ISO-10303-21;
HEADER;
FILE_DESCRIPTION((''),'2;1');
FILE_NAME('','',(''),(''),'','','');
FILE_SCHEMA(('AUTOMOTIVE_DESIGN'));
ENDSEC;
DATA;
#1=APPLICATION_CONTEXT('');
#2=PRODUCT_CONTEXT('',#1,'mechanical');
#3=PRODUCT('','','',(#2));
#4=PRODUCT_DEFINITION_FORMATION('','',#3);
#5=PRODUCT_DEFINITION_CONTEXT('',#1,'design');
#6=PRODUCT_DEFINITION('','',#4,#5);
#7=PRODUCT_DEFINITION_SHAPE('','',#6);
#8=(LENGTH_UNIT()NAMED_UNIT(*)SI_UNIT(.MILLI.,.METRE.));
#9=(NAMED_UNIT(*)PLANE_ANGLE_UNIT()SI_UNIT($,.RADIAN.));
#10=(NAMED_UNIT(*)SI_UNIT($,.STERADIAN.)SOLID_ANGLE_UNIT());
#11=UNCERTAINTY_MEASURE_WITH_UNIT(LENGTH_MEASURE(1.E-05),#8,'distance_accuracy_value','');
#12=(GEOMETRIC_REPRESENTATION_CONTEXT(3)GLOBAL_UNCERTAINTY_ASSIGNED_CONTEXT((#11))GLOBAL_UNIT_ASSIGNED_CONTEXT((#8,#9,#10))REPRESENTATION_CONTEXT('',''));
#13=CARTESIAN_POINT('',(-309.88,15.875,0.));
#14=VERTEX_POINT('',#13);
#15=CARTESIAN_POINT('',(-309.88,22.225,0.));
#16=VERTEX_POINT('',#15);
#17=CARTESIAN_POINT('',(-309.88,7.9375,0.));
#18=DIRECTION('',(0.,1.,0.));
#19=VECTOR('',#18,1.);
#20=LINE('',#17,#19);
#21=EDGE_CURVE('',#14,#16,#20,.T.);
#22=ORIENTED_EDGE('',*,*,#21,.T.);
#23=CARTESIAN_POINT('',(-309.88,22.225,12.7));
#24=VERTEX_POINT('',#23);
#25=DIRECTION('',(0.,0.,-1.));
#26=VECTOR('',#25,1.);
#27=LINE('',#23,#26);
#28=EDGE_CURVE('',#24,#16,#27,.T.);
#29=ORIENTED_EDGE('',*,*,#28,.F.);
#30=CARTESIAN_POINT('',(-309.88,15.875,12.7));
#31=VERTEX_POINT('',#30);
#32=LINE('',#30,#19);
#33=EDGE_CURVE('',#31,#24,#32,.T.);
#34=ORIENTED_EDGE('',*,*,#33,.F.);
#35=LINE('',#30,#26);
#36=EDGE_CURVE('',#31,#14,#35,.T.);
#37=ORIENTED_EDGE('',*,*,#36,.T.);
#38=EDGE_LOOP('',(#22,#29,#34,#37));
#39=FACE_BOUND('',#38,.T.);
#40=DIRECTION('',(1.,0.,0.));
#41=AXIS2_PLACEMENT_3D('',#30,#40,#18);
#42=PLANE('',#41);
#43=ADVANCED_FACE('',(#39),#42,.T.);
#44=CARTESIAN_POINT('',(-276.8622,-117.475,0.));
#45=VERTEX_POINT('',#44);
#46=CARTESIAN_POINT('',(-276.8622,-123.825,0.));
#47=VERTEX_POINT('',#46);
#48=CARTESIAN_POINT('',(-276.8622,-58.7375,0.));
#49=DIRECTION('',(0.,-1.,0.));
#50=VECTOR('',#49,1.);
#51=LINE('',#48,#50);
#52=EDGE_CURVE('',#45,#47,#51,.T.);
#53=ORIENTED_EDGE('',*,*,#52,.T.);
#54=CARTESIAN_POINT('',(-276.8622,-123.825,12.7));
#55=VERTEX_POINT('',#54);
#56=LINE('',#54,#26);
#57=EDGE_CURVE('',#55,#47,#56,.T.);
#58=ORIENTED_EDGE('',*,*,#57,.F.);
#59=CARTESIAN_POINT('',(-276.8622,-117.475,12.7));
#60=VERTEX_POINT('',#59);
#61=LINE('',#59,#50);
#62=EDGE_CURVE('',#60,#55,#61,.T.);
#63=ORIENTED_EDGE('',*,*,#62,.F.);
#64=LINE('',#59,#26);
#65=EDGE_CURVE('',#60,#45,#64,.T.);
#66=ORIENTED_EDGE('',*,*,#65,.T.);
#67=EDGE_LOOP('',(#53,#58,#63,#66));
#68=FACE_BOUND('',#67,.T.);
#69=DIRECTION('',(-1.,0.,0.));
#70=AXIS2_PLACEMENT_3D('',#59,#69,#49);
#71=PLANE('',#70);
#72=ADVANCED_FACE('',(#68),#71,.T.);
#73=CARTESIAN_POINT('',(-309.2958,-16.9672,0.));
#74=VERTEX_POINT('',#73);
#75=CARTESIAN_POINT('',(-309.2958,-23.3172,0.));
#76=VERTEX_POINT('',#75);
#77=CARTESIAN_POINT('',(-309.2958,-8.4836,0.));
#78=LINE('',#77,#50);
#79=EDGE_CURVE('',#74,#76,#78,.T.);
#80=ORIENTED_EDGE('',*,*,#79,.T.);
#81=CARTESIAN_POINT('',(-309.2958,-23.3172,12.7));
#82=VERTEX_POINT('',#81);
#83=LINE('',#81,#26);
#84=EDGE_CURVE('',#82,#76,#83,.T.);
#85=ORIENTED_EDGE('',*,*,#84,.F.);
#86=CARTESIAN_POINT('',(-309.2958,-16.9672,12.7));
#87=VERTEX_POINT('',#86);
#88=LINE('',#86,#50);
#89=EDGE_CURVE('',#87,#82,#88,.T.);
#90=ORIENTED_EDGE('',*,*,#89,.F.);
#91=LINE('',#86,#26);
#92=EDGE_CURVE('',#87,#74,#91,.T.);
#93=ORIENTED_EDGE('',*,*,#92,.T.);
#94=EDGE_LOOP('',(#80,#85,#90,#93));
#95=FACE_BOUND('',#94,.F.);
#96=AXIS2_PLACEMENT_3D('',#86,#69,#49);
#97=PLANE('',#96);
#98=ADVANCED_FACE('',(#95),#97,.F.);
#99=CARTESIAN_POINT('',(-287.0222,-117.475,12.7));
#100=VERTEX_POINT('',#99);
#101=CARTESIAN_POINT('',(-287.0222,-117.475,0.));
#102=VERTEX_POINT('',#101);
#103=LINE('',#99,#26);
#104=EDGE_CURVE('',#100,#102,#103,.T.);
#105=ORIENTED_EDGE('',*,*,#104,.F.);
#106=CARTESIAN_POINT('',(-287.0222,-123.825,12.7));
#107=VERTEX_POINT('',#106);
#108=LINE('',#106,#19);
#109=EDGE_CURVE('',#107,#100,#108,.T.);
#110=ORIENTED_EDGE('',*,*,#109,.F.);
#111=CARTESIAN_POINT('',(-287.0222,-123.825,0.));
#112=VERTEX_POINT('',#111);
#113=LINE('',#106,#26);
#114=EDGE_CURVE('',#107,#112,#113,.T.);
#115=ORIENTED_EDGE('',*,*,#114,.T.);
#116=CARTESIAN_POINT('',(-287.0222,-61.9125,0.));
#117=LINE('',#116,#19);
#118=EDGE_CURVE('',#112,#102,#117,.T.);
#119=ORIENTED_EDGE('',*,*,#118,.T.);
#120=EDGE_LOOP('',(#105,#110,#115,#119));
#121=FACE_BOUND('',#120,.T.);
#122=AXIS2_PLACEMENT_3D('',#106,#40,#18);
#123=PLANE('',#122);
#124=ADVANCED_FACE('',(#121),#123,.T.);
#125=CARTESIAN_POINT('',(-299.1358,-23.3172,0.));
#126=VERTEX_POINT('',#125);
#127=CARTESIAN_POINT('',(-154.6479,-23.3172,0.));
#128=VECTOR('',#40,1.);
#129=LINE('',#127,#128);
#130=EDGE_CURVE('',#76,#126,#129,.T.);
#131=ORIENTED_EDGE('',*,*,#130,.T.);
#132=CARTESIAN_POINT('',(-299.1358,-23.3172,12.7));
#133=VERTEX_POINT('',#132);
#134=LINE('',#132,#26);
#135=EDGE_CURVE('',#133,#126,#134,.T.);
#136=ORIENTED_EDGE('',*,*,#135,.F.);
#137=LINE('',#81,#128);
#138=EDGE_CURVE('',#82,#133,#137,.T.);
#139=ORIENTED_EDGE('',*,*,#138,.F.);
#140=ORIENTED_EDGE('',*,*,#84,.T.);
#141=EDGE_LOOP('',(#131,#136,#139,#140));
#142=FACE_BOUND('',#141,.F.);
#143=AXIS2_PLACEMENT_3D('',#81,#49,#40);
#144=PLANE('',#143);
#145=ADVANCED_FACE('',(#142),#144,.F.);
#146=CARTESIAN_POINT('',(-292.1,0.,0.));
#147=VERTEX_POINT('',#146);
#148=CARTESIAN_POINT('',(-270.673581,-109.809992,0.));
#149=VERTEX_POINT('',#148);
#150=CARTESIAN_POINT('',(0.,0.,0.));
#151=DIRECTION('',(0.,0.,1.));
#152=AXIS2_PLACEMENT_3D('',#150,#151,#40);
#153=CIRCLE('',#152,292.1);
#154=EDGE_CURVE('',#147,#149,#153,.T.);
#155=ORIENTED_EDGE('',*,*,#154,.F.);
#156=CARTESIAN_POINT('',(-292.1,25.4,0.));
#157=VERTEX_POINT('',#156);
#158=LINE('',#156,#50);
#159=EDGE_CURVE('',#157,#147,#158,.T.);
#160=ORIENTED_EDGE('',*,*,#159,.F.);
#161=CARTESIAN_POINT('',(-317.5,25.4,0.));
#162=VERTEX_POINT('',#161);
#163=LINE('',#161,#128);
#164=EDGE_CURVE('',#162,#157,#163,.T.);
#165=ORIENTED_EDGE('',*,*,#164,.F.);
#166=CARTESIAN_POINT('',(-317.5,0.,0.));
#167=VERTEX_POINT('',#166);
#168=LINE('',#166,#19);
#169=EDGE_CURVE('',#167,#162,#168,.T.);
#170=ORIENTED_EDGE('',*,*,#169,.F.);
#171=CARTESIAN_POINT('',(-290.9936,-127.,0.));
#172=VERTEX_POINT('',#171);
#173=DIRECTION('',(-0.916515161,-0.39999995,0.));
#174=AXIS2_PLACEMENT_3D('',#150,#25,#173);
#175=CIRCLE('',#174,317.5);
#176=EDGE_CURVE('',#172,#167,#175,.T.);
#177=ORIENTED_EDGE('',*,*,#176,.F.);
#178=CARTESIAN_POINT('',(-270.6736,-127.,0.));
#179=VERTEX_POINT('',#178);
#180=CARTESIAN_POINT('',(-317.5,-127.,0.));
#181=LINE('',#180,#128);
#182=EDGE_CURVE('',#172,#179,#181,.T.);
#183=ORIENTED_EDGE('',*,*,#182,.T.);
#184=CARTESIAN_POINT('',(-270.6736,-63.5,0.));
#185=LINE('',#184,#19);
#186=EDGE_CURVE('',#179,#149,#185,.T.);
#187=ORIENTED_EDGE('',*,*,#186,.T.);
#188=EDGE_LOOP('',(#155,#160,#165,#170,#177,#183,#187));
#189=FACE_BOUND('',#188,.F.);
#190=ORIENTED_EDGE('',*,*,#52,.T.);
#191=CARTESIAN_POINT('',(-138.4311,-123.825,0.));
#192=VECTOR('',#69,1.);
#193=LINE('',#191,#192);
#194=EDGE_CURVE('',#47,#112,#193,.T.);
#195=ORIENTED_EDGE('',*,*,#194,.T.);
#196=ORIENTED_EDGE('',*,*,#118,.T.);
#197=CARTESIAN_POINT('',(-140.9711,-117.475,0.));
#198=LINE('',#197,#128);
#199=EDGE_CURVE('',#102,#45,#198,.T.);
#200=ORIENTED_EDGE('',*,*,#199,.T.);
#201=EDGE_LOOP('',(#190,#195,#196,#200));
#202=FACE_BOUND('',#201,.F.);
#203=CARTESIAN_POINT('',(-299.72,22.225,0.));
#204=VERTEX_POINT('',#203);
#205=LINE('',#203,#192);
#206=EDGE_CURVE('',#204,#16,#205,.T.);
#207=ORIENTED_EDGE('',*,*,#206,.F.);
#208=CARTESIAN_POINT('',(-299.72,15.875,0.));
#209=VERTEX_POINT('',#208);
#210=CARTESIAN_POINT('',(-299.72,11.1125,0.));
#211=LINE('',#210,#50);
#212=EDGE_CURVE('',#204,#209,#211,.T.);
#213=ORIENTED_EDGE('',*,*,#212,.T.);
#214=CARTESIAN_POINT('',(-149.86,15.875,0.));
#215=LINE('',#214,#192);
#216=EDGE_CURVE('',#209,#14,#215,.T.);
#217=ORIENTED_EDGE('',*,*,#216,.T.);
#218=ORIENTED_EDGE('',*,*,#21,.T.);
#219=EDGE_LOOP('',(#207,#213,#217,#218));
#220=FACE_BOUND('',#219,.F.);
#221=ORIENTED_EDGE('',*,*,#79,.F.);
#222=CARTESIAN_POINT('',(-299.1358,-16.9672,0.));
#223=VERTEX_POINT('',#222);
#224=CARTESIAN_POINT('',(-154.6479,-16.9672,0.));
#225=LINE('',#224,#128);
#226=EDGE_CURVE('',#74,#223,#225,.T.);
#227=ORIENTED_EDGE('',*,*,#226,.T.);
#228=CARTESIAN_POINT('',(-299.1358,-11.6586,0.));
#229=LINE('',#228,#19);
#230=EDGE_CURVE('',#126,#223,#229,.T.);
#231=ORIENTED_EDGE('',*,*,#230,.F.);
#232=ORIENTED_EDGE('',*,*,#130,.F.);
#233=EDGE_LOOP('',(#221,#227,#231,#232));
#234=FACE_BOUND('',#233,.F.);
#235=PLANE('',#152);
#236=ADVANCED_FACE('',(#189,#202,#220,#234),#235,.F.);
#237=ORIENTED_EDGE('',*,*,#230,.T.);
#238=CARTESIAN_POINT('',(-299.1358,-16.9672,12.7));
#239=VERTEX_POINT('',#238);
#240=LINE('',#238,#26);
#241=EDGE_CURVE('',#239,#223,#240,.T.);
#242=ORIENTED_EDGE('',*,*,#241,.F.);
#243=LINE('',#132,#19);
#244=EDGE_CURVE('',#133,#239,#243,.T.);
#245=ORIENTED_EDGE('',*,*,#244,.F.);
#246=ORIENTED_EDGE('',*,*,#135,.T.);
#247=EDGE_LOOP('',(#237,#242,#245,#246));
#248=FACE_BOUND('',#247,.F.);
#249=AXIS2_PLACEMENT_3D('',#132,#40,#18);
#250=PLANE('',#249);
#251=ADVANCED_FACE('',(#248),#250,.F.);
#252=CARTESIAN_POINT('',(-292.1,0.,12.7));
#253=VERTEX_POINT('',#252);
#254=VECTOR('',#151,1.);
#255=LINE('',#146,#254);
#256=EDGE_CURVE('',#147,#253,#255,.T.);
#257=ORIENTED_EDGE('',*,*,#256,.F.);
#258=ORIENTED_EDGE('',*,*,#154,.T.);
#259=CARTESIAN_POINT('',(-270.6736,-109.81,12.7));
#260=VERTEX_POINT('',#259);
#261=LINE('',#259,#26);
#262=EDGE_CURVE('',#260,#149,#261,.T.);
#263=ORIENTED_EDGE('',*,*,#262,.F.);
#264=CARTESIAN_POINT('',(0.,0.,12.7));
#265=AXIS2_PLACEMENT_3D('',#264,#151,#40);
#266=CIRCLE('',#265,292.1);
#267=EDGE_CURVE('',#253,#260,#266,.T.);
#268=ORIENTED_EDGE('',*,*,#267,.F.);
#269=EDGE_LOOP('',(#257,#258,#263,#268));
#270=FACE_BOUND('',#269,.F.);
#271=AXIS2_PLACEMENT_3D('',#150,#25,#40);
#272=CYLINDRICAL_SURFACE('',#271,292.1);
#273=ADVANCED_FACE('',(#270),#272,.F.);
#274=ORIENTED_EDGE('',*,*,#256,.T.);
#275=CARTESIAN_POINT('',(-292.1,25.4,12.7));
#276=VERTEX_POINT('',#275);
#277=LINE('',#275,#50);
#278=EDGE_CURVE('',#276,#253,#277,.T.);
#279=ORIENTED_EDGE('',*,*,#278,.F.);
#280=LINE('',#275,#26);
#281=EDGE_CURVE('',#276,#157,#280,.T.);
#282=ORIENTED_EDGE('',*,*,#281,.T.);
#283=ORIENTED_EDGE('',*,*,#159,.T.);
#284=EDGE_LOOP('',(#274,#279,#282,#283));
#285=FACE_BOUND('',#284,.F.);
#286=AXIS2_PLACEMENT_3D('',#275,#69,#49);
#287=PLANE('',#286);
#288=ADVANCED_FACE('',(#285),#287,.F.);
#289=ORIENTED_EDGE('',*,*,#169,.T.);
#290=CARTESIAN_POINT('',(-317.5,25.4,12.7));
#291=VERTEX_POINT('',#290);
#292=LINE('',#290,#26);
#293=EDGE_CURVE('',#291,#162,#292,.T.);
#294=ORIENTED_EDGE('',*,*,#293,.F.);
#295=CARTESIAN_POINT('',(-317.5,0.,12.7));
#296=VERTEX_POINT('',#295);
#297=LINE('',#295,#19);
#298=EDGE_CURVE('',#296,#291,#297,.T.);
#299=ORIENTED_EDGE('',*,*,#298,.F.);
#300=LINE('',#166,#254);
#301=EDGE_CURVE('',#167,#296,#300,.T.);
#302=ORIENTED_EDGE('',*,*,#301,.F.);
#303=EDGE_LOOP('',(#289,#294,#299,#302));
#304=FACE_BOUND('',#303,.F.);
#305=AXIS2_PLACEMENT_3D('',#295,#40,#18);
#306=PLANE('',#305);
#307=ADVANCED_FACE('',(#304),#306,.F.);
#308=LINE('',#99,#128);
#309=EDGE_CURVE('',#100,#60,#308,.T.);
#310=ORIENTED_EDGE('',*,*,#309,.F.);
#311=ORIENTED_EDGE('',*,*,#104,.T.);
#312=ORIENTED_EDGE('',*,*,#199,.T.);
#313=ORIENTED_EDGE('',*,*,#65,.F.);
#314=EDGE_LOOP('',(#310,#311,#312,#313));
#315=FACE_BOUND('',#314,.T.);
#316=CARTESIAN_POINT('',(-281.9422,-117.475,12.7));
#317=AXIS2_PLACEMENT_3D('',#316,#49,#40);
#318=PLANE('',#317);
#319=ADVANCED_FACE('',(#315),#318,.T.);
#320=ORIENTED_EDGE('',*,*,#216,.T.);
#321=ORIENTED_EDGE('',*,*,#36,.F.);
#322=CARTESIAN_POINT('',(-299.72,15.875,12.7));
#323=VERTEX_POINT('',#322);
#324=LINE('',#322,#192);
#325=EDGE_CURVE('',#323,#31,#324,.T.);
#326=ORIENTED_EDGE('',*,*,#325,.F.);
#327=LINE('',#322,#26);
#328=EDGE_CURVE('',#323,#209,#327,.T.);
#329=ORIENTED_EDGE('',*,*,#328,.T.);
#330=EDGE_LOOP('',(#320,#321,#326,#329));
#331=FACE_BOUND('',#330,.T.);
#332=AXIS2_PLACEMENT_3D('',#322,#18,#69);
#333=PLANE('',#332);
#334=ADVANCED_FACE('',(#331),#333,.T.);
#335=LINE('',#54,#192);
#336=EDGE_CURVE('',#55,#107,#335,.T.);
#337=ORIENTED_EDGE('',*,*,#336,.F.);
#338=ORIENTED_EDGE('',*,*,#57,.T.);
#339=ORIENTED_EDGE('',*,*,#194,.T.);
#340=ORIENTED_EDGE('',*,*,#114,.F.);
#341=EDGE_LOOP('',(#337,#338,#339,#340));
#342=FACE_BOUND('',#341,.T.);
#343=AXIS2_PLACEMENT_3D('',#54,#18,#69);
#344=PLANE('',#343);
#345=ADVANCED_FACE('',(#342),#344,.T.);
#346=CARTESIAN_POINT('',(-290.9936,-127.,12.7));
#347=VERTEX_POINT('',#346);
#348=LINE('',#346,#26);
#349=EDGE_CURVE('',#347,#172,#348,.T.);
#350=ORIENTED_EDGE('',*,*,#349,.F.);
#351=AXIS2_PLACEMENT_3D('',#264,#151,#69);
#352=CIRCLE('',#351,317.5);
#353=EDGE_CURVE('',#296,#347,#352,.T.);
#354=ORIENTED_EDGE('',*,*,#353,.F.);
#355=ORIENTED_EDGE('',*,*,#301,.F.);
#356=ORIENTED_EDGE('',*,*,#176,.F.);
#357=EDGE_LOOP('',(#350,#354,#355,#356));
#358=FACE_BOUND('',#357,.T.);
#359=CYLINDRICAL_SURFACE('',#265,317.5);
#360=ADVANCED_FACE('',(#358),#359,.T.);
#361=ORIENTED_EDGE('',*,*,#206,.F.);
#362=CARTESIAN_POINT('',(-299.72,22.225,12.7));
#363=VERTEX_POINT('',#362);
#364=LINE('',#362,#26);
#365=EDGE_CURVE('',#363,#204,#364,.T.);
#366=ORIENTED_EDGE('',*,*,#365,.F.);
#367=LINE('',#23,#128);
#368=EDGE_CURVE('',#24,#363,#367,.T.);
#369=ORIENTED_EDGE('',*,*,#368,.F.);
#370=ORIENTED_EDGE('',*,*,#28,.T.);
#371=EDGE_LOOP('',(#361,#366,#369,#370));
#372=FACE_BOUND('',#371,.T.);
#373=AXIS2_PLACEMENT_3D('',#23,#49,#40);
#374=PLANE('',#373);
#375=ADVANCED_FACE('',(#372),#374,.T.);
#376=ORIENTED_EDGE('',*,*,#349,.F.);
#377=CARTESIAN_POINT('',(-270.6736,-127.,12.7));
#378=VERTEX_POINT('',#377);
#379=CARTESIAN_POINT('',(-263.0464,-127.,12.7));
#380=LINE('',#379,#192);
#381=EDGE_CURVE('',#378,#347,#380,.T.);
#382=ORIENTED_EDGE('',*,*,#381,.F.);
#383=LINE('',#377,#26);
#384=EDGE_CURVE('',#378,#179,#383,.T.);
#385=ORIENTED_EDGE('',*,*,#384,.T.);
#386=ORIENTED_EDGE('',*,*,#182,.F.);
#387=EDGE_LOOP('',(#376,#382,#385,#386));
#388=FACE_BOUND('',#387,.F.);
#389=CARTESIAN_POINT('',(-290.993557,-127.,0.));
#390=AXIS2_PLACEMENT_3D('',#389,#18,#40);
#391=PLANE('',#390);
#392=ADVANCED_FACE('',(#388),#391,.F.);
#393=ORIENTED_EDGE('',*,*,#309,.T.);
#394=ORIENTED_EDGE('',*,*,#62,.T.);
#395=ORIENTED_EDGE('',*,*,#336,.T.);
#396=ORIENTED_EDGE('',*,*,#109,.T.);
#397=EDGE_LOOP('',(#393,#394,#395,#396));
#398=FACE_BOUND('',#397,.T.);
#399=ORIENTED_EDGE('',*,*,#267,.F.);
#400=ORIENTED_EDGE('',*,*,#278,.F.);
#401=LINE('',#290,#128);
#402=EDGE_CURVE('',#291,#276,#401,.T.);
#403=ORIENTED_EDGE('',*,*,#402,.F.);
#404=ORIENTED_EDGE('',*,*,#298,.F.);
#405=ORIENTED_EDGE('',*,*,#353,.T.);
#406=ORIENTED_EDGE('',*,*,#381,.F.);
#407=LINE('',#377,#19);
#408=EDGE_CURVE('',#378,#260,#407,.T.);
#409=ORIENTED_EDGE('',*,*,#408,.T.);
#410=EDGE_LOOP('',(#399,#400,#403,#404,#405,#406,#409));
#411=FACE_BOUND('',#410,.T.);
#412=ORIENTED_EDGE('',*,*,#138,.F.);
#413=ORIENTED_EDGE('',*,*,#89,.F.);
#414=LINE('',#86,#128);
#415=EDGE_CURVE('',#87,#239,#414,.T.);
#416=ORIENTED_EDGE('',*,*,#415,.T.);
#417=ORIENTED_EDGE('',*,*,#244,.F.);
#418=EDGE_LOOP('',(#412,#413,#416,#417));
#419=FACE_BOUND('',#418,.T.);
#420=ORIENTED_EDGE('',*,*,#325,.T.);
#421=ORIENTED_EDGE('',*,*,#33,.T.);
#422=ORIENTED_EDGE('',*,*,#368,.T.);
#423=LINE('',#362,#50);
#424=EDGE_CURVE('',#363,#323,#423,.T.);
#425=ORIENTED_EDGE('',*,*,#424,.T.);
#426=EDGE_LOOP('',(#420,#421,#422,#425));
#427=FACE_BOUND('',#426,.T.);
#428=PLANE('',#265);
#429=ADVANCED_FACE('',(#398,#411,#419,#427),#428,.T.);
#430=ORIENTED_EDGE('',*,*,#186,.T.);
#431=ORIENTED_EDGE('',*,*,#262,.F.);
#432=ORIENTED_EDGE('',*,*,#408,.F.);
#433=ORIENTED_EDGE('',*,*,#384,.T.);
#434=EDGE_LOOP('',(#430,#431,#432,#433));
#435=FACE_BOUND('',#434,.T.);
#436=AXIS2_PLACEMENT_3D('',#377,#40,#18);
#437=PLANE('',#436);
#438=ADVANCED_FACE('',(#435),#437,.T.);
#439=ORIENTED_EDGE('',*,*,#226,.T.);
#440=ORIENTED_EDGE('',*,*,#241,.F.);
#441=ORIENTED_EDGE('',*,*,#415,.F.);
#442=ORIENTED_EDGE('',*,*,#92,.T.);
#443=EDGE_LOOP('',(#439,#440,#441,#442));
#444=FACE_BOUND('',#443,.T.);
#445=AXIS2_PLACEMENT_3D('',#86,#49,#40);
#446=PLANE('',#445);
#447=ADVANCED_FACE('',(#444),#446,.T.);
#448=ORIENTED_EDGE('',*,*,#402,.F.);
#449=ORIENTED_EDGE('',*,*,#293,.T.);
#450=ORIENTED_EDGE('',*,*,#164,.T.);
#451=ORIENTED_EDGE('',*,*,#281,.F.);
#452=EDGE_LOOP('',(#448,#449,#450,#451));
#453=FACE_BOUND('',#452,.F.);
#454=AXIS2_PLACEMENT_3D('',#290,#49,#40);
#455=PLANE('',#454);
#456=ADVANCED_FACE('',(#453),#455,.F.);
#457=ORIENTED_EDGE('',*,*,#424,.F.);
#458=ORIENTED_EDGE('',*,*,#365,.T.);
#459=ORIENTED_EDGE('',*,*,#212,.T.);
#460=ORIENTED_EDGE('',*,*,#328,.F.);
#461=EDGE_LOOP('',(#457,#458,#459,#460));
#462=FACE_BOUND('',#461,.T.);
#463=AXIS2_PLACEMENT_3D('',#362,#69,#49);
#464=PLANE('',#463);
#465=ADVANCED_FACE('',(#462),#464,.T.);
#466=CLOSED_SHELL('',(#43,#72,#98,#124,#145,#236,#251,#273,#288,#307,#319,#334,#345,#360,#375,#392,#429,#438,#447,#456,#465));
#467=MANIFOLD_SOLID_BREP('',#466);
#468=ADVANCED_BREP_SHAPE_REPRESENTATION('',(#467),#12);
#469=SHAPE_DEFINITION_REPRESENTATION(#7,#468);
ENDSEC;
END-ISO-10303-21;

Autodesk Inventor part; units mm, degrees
ref_plane "YZ Plane" through (0, 0, 0) normal (1, 0, 0) x (0, 1, 0)
ref_plane "XZ Plane" through (0, 0, 0) normal (0, 1, 0) x (-1, 0, 0)
ref_plane "XY Plane" through (0, 0, 0) normal (0, 0, 1) x (1, 0, 0)
sketch "Sketch1" plane through (0, 0, 0) normal (0, 0, 1) x (1, 0, 0)
  circle A0 centre (0, 0) radius 292.1
  line L0 (-292.1, 0) -> (-266.7, 0)
  line L1 (-292.1, 0) -> (-317.5, 0)
  circle A1 centre (0, 0) radius 317.5
  line L2 (-317.5, 0) -> (-317.5, -127)
  line L3 (-317.5, -127) -> (-263.0464, -127)
  circle A2 centre (0, 0) radius 317.5
  dimension "d0" = 584.2
  dimension "d1" = 25.4
  dimension "d2" = 25.4
  dimension "d3" = 127
extrude "Extrusion1" add sketch "Sketch1" along normal blind 12.7 contours A0 L3 A1 L1 | A1 L3 L2 picked at (-275.2864, -120.3141)
sketch "Sketch2" plane through (0, 0, 12.7) normal (0, 0, 1) x (1, 0, 0)
  line L0 (-317.5, 0) -> (-317.5, -127) projected
  line L1 (-317.5, -127) -> (-263.0464, -127) projected
  arc A0 (-292.1, 0) -> (-263.0464, -127) centre (0, 0) ccw projected
  circle A1 centre (0, 0) radius 292.1
  circle A2 centre (0, 0) radius 317.5
  line L2 (-317.5, 0) -> (-317.5, -127)
  line L3 (-317.5, -127) -> (-290.9936, -127)
extrude "Extrusion2" cut sketch "Sketch2" against normal blind 25.4 contours A2 L1 L0
sketch "Sketch3" plane through (0, 0, 12.7) normal (0, 0, 1) x (1, 0, 0)
  arc A0 (-317.5, 0) -> (-290.9936, -127) centre (0, 0) ccw projected
  line L0 (-290.9936, -127) -> (-316.1859, -127)
  line L1 (-295.9122, -115.0749) -> (-295.9122, -127)
  line L2 (-281.9422, -117.475) -> (-276.8622, -117.475)
  line L3 (-276.8622, -117.475) -> (-276.8622, -123.825)
  line L4 (-276.8622, -123.825) -> (-287.0222, -123.825)
  line L5 (-287.0222, -123.825) -> (-287.0222, -117.475)
  line L6 (-287.0222, -117.475) -> (-281.9422, -117.475)
  line L7 (-290.9936, -127) -> (-263.0464, -127) projected
  dimension "d16" = 5.08
  dimension "d17" = 6.35
  dimension "d18" = 10.16
  dimension "d20" = 4.9186
  dimension "d33" = 13.97
  dimension "d34" = 9.525
  dimension "d35" = 8.89
extrude "Extrusion3" cut sketch "Sketch3" against normal blind 25.4
sketch "Sketch4" plane through (0, 0, 12.7) normal (0, 0, 1) x (1, 0, 0)
  arc A0 (-317.5, 0) -> (-290.9936, -127) centre (0, 0) ccw projected
  arc A1 (-292.1, 0) -> (-263.0464, -127) centre (0, 0) ccw projected
  line L0 (-292.1, 0) -> (-317.5, 0) projected
  line L1 (-317.5, 0) -> (-317.5, 25.4)
  line L2 (-317.5, 25.4) -> (-292.1, 25.4)
  line L3 (-292.1, 25.4) -> (-292.1, 0)
  line L4 (-317.5, 0) -> (-292.1, 0)
  dimension "d24" = 25.4
extrude "Extrusion4" add sketch "Sketch4" against normal blind 12.7
sketch "Sketch5" plane through (0, 0, 12.7) normal (0, 0, 1) x (1, 0, 0)
  line L0 (-292.1, 0) -> (-292.1, 25.4) projected
  line L1 (-292.1, 25.4) -> (-317.5, 25.4) projected
  line L2 (-317.5, 25.4) -> (-317.5, 0) projected
  line L3 (-304.8, 25.4) -> (-304.8, 22.225)
  line L4 (-304.8, 22.225) -> (-299.72, 22.225)
  line L5 (-299.72, 22.225) -> (-299.72, 15.875)
  line L6 (-299.72, 15.875) -> (-309.88, 15.875)
  line L7 (-309.88, 15.875) -> (-309.88, 22.225)
  line L8 (-309.88, 22.225) -> (-304.8, 22.225)
  dimension "d27" = 3.175
  dimension "d28" = 5.08
  dimension "d29" = 6.35
  dimension "d30" = 10.16
extrude "Extrusion5" cut sketch "Sketch5" against normal blind 254
sketch "Sketch6" plane through (0, 0, 12.7) normal (0, 0, 1) x (1, 0, 0)
  line L0 (-290.9936, -127) -> (-263.0464, -127) projected
  arc A0 (-292.1, 0) -> (-263.0464, -127) centre (0, 0) ccw projected
  line L1 (-290.9936, -127) -> (-270.6736, -127)
  line L2 (-270.6736, -127) -> (-270.6736, -109.81)
  line L3 (-270.6736, -109.81) -> (-256.8603, -109.81)
  line L4 (-256.8603, -109.81) -> (-256.8603, -127)
  line L5 (-256.8603, -127) -> (-270.6736, -127)
  dimension "d36" = 20.32
  dimension "d37" = 13.8133
extrude "Extrusion6" cut sketch "Sketch6" against normal blind 254 contours L2 A0 L0
sketch "Sketch7" plane through (0, 0, 12.7) normal (0, 0, 1) x (1, 0, 0)
  arc A0 (-317.5, 0) -> (-290.9936, -127) centre (0, 0) ccw projected
  line L0 (-276.8622, -117.475) -> (-276.8622, -123.825) projected
  line L1 (-317.5, 0) -> (-317.5, -127) construction
  line L2 (-317.5, -63.5) -> (-317.5, -50.8) construction
  line L3 (-317.5, -50.8) -> (-317.5, -38.1) construction
  line L4 (-317.5, -38.1) -> (-317.5, -25.4) construction
  line L5 (-317.5, -25.4) -> (-317.5, -12.7) construction
  line L6 (-317.5, 23.7649) -> (-317.5, -16.9672) construction
  line L7 (-317.5, -16.9672) -> (-180.5967, -16.9672) construction
  line L8 (-317.5, -16.9672) -> (-309.2958, -16.9672) construction
  line L9 (-309.2958, -16.9672) -> (-309.2958, -23.3172)
  line L10 (-309.2958, -23.3172) -> (-299.1358, -23.3172)
  line L11 (-299.1358, -23.3172) -> (-299.1358, -16.9672)
  line L12 (-309.2958, -16.9672) -> (-299.1358, -16.9672)
  point P0 (-317.5, 25.4)
  dimension "d59" = 8.2042
  dimension "d60" = 6.35
  dimension "d61" = 10.16
  dimension "d65" = 42.3672
extrude "Extrusion8" cut sketch "Sketch7" against normal blind 25.4
properties part number "HopperFrontSupport_v2"
